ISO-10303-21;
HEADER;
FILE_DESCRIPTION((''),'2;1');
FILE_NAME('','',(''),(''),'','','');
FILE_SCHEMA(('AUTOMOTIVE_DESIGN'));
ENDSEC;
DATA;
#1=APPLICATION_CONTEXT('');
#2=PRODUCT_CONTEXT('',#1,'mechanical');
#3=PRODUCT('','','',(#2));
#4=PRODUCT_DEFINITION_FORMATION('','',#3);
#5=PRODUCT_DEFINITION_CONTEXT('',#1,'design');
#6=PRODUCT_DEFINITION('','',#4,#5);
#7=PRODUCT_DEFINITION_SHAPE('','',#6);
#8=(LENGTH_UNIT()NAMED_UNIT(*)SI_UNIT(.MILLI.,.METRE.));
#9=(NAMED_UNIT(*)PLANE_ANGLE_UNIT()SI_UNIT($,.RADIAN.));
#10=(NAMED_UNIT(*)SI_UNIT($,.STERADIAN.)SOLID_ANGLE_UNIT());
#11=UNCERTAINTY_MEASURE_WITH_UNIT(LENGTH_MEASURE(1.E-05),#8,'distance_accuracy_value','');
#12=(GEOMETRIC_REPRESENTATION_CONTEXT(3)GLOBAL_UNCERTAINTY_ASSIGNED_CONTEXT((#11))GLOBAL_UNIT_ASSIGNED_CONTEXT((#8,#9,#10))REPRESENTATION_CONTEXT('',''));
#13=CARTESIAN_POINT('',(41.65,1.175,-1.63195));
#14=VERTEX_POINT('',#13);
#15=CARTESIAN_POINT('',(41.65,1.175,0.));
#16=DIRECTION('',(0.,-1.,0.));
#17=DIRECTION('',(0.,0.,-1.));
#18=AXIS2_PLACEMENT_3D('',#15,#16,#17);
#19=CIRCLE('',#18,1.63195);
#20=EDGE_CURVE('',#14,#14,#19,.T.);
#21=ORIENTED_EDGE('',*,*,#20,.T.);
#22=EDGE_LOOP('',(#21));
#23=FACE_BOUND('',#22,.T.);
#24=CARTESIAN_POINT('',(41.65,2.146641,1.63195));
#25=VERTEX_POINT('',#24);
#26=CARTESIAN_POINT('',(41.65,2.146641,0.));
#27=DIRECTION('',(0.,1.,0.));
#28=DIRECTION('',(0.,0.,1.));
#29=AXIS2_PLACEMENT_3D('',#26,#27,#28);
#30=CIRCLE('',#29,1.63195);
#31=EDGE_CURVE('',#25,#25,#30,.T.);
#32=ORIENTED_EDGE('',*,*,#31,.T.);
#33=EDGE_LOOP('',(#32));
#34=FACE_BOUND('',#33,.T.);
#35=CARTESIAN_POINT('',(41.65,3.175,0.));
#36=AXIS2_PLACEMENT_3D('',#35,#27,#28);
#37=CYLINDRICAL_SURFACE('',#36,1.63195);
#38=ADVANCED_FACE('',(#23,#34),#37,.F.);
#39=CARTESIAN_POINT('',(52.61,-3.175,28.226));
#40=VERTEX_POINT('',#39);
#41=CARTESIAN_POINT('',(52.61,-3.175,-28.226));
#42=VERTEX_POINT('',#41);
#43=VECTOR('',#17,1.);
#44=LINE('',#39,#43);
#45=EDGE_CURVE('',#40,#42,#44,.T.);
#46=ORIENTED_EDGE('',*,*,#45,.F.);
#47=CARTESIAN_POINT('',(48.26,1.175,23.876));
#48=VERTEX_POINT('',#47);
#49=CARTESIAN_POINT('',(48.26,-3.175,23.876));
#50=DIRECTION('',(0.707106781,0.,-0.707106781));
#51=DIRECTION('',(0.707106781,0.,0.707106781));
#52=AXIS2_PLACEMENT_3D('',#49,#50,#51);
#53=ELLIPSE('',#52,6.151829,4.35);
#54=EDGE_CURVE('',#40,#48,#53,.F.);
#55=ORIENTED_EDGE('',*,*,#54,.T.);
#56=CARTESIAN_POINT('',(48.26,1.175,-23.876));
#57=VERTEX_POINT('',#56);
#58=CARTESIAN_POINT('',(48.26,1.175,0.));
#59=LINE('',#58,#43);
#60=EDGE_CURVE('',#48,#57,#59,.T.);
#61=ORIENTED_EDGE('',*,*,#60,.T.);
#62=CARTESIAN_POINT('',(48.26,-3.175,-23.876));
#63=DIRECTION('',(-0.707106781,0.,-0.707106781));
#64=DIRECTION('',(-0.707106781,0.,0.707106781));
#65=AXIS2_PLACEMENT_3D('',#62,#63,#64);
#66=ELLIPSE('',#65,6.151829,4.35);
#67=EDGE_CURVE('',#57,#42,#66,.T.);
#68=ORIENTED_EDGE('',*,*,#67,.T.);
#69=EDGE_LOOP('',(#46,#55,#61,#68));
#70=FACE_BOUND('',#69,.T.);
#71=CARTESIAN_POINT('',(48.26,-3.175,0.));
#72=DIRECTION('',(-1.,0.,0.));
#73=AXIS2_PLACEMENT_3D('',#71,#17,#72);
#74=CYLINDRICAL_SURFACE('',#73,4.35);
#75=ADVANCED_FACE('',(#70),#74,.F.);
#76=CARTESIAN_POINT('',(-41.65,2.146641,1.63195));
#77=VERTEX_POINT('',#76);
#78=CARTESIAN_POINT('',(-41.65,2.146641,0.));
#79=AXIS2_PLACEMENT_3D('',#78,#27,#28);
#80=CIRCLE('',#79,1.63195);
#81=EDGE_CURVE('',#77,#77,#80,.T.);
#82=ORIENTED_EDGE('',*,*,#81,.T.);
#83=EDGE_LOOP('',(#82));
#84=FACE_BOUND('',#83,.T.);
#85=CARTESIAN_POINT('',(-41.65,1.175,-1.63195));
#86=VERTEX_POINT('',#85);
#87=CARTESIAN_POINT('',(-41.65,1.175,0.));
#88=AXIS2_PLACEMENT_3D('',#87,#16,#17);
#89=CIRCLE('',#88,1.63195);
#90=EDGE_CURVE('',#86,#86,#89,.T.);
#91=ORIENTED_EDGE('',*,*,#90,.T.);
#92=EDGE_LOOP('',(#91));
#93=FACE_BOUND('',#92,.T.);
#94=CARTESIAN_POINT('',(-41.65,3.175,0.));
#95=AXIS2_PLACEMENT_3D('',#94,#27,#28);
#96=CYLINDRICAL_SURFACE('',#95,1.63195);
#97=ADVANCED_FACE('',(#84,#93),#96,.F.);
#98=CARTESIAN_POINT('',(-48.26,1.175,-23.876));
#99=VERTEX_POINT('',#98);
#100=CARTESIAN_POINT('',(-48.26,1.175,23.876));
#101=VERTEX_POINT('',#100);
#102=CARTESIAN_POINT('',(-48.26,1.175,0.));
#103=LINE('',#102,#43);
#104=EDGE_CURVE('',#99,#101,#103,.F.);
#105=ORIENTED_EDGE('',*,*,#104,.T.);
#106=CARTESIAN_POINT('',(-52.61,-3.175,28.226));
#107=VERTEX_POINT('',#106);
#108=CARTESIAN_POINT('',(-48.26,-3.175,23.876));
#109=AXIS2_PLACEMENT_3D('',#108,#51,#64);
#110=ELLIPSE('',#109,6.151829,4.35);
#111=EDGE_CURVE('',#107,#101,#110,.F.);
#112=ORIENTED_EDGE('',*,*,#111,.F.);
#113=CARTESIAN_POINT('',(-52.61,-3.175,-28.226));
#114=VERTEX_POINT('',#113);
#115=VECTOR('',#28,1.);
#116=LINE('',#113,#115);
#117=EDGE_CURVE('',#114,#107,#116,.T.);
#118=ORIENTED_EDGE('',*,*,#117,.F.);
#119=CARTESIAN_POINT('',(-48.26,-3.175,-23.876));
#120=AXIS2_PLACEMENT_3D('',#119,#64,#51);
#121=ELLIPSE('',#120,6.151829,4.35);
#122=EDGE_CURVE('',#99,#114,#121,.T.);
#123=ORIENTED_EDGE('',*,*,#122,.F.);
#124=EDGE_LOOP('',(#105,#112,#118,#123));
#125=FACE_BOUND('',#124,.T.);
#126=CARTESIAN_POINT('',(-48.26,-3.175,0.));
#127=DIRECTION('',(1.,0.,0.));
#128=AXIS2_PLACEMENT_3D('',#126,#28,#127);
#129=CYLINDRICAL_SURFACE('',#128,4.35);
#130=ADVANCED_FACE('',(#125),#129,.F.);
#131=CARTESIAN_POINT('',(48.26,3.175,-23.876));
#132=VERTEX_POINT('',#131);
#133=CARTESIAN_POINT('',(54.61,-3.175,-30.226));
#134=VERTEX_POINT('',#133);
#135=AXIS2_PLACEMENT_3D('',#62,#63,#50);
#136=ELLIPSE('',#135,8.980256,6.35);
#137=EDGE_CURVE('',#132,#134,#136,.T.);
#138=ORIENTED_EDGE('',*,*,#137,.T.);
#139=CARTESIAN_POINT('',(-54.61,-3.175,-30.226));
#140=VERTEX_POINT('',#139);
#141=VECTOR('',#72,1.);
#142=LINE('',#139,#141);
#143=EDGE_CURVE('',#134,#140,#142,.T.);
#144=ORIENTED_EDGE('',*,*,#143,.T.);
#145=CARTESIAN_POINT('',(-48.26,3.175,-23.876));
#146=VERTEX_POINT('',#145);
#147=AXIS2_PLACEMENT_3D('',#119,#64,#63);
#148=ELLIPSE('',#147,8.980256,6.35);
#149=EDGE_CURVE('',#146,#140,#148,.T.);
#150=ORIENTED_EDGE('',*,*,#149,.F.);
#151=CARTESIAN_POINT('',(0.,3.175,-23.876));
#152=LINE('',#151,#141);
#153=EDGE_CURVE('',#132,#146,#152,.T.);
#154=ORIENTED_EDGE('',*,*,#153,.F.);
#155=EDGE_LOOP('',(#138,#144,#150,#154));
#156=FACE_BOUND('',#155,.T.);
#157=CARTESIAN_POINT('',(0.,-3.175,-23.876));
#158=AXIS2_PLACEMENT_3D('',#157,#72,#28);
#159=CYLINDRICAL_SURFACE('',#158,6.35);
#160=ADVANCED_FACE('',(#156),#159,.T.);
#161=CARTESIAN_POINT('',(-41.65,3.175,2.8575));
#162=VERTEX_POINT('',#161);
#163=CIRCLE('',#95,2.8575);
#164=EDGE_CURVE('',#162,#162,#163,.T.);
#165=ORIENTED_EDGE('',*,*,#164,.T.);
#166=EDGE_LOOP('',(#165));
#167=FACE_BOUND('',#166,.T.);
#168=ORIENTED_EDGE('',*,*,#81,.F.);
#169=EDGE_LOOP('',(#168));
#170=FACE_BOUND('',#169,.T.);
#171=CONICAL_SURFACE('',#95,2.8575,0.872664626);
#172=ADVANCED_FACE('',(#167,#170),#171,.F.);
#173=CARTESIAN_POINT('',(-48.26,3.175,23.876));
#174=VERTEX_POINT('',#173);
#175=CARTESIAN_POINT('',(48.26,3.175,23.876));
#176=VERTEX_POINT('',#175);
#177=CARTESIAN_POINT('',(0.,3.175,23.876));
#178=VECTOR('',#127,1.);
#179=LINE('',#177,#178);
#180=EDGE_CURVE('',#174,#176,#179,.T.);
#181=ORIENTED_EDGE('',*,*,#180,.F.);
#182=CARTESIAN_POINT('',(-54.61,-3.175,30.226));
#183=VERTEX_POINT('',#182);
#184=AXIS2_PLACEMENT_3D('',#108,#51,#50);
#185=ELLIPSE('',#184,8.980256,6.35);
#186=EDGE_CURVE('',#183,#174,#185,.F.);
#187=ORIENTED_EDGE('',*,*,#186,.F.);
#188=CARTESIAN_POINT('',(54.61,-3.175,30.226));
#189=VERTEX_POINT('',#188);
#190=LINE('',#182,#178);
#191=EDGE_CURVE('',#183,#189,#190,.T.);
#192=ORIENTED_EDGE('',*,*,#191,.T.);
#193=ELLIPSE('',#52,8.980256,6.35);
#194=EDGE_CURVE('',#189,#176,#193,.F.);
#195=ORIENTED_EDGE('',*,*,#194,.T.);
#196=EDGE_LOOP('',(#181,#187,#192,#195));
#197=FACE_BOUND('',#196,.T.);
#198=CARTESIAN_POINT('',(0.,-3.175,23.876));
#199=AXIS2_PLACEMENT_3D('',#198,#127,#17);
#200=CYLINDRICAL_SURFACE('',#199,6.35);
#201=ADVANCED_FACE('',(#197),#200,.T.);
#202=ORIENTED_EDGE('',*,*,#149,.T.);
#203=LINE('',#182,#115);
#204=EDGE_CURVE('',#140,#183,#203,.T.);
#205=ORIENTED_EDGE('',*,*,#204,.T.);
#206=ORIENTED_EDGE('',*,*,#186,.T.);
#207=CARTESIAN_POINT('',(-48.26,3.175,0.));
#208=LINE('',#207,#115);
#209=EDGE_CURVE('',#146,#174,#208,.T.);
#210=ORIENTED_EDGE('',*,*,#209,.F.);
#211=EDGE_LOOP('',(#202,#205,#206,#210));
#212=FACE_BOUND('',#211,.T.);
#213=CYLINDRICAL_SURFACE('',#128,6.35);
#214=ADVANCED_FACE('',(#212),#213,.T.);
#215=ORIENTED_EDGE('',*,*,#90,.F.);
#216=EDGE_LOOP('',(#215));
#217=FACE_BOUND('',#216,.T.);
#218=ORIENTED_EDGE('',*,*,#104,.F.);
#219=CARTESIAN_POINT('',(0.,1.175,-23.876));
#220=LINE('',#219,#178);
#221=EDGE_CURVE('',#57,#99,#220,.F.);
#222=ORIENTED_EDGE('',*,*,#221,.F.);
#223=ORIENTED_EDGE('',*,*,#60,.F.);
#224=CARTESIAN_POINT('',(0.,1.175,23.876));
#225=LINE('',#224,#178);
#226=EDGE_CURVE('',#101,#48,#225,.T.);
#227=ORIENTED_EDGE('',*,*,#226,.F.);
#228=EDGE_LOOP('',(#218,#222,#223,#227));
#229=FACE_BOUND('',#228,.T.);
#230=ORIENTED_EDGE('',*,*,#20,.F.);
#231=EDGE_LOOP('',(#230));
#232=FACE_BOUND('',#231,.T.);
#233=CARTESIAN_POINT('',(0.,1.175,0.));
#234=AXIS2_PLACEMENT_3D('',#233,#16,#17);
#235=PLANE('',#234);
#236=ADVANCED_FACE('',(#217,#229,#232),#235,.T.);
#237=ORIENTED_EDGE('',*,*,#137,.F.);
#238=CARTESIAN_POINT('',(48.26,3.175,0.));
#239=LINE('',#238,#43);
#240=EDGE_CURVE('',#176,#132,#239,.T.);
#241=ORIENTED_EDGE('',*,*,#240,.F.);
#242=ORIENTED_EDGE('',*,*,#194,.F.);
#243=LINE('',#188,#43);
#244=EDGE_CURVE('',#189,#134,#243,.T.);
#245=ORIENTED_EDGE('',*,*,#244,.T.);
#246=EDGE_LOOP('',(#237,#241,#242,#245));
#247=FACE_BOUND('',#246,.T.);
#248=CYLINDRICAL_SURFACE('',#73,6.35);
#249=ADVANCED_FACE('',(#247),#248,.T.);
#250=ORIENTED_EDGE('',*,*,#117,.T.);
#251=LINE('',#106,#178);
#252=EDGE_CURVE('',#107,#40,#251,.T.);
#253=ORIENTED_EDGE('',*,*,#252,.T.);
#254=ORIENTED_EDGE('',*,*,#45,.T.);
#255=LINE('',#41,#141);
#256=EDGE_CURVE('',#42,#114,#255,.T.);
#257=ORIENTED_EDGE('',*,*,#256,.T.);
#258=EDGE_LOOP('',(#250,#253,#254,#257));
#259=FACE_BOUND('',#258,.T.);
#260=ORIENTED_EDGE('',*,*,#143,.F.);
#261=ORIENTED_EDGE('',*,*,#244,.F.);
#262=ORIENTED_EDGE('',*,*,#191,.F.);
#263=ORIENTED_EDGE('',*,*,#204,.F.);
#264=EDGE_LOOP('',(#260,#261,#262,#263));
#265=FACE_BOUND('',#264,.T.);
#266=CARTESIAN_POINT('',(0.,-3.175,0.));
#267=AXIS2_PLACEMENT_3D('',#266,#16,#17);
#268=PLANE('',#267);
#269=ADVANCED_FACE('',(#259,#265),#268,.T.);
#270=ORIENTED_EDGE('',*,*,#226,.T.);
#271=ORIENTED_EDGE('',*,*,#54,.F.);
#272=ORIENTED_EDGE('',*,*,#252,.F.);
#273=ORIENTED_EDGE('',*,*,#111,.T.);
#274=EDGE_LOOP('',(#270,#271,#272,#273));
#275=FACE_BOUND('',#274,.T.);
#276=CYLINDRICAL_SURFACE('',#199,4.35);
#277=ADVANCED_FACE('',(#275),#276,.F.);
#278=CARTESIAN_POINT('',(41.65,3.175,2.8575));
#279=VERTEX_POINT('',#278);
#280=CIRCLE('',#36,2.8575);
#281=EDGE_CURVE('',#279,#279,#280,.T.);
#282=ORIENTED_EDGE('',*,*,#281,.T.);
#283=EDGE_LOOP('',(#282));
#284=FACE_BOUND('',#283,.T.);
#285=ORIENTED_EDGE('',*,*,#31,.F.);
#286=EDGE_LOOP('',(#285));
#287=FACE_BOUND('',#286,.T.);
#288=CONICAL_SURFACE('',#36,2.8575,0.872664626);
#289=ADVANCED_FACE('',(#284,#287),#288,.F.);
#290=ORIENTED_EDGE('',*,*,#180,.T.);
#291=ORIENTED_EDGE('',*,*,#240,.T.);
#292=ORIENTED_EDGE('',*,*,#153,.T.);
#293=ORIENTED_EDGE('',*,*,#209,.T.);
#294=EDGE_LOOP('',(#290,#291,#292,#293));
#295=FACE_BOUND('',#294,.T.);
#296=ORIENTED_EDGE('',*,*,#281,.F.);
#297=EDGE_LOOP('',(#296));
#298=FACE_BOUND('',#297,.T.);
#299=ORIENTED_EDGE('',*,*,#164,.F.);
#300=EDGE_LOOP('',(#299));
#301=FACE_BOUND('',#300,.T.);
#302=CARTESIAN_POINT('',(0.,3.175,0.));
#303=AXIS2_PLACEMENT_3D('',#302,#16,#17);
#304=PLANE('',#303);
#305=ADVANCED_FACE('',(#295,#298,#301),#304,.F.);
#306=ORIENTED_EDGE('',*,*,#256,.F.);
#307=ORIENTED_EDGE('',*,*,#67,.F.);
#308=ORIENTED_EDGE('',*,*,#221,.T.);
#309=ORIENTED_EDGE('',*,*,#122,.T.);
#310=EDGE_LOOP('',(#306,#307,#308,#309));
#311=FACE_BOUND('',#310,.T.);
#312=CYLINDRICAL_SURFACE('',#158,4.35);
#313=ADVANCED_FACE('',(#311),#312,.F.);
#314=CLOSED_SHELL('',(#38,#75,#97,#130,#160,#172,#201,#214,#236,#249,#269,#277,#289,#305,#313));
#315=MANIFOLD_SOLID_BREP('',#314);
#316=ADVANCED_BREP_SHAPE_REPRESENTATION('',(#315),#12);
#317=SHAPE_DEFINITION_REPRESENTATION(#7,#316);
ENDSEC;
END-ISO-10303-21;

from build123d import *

# Parameters (mm, degrees)
SKETCH2_W                                         = 109.22
SKETCH2_H                                         = 60.452
BOSS_EXTRUDE1_DEPTH                               = 3.175
FILLET3_R                                         = 6.35
SHELL1_T                                          = -2
CSK_FOR_4_FLAT_HEAD_MACHINE_SCREW_100_D           = 3.2639
CSK_FOR_4_FLAT_HEAD_MACHINE_SCREW_100_CSINK_D     = 5.715
CSK_FOR_4_FLAT_HEAD_MACHINE_SCREW_100_CSINK_ANGLE = 100


with BuildPart() as part:
    # Sketch2 → Boss-Extrude1 (new, symmetric)
    with BuildSketch(Plane(origin=(0, 0, 0), x_dir=(1, 0, 0), z_dir=(0, 1, 0))):
        Rectangle(SKETCH2_W, SKETCH2_H)
    extrude(amount=BOSS_EXTRUDE1_DEPTH, both=True)

    # Fillet3
    fillet3_edges = [part.edges().sort_by_distance(p)[0] for p in [
        (-54.61, 3.175, 0),
        (0, 3.175, -30.226),
        (54.61, 3.175, 0),
        (0, 3.175, 30.226),
    ]]
    fillet(fillet3_edges, radius=FILLET3_R - 0.0001)  # a hair under: the kernel refuses the full size

    # Shell1
    shell1_openings = [part.faces().sort_by_distance(p)[0] for p in [
        (0, -3.175, 0),
    ]]
    offset(amount=SHELL1_T, openings=shell1_openings)

    # CSK for #4 Flat Head Machine Screw (100)1 (through all)
    with Locations(Plane(origin=(0, 3.175, 0), x_dir=(1, 0, 0), z_dir=(0, 1, 0))):
        with Locations((41.65, 0)):
            csk_for_4_flat_head_machine_screw_100 = CounterSinkHole(CSK_FOR_4_FLAT_HEAD_MACHINE_SCREW_100_D / 2, CSK_FOR_4_FLAT_HEAD_MACHINE_SCREW_100_CSINK_D / 2, counter_sink_angle=CSK_FOR_4_FLAT_HEAD_MACHINE_SCREW_100_CSINK_ANGLE)

    # Mirror1: CSK for #4 Flat Head Machine Screw (100)1 across plane
    add(csk_for_4_flat_head_machine_screw_100.mirror(Plane(origin=(0, 0, 0), x_dir=(0, 0, 1), z_dir=(1, 0, 0))), mode=Mode.SUBTRACT)


solid = part.part
